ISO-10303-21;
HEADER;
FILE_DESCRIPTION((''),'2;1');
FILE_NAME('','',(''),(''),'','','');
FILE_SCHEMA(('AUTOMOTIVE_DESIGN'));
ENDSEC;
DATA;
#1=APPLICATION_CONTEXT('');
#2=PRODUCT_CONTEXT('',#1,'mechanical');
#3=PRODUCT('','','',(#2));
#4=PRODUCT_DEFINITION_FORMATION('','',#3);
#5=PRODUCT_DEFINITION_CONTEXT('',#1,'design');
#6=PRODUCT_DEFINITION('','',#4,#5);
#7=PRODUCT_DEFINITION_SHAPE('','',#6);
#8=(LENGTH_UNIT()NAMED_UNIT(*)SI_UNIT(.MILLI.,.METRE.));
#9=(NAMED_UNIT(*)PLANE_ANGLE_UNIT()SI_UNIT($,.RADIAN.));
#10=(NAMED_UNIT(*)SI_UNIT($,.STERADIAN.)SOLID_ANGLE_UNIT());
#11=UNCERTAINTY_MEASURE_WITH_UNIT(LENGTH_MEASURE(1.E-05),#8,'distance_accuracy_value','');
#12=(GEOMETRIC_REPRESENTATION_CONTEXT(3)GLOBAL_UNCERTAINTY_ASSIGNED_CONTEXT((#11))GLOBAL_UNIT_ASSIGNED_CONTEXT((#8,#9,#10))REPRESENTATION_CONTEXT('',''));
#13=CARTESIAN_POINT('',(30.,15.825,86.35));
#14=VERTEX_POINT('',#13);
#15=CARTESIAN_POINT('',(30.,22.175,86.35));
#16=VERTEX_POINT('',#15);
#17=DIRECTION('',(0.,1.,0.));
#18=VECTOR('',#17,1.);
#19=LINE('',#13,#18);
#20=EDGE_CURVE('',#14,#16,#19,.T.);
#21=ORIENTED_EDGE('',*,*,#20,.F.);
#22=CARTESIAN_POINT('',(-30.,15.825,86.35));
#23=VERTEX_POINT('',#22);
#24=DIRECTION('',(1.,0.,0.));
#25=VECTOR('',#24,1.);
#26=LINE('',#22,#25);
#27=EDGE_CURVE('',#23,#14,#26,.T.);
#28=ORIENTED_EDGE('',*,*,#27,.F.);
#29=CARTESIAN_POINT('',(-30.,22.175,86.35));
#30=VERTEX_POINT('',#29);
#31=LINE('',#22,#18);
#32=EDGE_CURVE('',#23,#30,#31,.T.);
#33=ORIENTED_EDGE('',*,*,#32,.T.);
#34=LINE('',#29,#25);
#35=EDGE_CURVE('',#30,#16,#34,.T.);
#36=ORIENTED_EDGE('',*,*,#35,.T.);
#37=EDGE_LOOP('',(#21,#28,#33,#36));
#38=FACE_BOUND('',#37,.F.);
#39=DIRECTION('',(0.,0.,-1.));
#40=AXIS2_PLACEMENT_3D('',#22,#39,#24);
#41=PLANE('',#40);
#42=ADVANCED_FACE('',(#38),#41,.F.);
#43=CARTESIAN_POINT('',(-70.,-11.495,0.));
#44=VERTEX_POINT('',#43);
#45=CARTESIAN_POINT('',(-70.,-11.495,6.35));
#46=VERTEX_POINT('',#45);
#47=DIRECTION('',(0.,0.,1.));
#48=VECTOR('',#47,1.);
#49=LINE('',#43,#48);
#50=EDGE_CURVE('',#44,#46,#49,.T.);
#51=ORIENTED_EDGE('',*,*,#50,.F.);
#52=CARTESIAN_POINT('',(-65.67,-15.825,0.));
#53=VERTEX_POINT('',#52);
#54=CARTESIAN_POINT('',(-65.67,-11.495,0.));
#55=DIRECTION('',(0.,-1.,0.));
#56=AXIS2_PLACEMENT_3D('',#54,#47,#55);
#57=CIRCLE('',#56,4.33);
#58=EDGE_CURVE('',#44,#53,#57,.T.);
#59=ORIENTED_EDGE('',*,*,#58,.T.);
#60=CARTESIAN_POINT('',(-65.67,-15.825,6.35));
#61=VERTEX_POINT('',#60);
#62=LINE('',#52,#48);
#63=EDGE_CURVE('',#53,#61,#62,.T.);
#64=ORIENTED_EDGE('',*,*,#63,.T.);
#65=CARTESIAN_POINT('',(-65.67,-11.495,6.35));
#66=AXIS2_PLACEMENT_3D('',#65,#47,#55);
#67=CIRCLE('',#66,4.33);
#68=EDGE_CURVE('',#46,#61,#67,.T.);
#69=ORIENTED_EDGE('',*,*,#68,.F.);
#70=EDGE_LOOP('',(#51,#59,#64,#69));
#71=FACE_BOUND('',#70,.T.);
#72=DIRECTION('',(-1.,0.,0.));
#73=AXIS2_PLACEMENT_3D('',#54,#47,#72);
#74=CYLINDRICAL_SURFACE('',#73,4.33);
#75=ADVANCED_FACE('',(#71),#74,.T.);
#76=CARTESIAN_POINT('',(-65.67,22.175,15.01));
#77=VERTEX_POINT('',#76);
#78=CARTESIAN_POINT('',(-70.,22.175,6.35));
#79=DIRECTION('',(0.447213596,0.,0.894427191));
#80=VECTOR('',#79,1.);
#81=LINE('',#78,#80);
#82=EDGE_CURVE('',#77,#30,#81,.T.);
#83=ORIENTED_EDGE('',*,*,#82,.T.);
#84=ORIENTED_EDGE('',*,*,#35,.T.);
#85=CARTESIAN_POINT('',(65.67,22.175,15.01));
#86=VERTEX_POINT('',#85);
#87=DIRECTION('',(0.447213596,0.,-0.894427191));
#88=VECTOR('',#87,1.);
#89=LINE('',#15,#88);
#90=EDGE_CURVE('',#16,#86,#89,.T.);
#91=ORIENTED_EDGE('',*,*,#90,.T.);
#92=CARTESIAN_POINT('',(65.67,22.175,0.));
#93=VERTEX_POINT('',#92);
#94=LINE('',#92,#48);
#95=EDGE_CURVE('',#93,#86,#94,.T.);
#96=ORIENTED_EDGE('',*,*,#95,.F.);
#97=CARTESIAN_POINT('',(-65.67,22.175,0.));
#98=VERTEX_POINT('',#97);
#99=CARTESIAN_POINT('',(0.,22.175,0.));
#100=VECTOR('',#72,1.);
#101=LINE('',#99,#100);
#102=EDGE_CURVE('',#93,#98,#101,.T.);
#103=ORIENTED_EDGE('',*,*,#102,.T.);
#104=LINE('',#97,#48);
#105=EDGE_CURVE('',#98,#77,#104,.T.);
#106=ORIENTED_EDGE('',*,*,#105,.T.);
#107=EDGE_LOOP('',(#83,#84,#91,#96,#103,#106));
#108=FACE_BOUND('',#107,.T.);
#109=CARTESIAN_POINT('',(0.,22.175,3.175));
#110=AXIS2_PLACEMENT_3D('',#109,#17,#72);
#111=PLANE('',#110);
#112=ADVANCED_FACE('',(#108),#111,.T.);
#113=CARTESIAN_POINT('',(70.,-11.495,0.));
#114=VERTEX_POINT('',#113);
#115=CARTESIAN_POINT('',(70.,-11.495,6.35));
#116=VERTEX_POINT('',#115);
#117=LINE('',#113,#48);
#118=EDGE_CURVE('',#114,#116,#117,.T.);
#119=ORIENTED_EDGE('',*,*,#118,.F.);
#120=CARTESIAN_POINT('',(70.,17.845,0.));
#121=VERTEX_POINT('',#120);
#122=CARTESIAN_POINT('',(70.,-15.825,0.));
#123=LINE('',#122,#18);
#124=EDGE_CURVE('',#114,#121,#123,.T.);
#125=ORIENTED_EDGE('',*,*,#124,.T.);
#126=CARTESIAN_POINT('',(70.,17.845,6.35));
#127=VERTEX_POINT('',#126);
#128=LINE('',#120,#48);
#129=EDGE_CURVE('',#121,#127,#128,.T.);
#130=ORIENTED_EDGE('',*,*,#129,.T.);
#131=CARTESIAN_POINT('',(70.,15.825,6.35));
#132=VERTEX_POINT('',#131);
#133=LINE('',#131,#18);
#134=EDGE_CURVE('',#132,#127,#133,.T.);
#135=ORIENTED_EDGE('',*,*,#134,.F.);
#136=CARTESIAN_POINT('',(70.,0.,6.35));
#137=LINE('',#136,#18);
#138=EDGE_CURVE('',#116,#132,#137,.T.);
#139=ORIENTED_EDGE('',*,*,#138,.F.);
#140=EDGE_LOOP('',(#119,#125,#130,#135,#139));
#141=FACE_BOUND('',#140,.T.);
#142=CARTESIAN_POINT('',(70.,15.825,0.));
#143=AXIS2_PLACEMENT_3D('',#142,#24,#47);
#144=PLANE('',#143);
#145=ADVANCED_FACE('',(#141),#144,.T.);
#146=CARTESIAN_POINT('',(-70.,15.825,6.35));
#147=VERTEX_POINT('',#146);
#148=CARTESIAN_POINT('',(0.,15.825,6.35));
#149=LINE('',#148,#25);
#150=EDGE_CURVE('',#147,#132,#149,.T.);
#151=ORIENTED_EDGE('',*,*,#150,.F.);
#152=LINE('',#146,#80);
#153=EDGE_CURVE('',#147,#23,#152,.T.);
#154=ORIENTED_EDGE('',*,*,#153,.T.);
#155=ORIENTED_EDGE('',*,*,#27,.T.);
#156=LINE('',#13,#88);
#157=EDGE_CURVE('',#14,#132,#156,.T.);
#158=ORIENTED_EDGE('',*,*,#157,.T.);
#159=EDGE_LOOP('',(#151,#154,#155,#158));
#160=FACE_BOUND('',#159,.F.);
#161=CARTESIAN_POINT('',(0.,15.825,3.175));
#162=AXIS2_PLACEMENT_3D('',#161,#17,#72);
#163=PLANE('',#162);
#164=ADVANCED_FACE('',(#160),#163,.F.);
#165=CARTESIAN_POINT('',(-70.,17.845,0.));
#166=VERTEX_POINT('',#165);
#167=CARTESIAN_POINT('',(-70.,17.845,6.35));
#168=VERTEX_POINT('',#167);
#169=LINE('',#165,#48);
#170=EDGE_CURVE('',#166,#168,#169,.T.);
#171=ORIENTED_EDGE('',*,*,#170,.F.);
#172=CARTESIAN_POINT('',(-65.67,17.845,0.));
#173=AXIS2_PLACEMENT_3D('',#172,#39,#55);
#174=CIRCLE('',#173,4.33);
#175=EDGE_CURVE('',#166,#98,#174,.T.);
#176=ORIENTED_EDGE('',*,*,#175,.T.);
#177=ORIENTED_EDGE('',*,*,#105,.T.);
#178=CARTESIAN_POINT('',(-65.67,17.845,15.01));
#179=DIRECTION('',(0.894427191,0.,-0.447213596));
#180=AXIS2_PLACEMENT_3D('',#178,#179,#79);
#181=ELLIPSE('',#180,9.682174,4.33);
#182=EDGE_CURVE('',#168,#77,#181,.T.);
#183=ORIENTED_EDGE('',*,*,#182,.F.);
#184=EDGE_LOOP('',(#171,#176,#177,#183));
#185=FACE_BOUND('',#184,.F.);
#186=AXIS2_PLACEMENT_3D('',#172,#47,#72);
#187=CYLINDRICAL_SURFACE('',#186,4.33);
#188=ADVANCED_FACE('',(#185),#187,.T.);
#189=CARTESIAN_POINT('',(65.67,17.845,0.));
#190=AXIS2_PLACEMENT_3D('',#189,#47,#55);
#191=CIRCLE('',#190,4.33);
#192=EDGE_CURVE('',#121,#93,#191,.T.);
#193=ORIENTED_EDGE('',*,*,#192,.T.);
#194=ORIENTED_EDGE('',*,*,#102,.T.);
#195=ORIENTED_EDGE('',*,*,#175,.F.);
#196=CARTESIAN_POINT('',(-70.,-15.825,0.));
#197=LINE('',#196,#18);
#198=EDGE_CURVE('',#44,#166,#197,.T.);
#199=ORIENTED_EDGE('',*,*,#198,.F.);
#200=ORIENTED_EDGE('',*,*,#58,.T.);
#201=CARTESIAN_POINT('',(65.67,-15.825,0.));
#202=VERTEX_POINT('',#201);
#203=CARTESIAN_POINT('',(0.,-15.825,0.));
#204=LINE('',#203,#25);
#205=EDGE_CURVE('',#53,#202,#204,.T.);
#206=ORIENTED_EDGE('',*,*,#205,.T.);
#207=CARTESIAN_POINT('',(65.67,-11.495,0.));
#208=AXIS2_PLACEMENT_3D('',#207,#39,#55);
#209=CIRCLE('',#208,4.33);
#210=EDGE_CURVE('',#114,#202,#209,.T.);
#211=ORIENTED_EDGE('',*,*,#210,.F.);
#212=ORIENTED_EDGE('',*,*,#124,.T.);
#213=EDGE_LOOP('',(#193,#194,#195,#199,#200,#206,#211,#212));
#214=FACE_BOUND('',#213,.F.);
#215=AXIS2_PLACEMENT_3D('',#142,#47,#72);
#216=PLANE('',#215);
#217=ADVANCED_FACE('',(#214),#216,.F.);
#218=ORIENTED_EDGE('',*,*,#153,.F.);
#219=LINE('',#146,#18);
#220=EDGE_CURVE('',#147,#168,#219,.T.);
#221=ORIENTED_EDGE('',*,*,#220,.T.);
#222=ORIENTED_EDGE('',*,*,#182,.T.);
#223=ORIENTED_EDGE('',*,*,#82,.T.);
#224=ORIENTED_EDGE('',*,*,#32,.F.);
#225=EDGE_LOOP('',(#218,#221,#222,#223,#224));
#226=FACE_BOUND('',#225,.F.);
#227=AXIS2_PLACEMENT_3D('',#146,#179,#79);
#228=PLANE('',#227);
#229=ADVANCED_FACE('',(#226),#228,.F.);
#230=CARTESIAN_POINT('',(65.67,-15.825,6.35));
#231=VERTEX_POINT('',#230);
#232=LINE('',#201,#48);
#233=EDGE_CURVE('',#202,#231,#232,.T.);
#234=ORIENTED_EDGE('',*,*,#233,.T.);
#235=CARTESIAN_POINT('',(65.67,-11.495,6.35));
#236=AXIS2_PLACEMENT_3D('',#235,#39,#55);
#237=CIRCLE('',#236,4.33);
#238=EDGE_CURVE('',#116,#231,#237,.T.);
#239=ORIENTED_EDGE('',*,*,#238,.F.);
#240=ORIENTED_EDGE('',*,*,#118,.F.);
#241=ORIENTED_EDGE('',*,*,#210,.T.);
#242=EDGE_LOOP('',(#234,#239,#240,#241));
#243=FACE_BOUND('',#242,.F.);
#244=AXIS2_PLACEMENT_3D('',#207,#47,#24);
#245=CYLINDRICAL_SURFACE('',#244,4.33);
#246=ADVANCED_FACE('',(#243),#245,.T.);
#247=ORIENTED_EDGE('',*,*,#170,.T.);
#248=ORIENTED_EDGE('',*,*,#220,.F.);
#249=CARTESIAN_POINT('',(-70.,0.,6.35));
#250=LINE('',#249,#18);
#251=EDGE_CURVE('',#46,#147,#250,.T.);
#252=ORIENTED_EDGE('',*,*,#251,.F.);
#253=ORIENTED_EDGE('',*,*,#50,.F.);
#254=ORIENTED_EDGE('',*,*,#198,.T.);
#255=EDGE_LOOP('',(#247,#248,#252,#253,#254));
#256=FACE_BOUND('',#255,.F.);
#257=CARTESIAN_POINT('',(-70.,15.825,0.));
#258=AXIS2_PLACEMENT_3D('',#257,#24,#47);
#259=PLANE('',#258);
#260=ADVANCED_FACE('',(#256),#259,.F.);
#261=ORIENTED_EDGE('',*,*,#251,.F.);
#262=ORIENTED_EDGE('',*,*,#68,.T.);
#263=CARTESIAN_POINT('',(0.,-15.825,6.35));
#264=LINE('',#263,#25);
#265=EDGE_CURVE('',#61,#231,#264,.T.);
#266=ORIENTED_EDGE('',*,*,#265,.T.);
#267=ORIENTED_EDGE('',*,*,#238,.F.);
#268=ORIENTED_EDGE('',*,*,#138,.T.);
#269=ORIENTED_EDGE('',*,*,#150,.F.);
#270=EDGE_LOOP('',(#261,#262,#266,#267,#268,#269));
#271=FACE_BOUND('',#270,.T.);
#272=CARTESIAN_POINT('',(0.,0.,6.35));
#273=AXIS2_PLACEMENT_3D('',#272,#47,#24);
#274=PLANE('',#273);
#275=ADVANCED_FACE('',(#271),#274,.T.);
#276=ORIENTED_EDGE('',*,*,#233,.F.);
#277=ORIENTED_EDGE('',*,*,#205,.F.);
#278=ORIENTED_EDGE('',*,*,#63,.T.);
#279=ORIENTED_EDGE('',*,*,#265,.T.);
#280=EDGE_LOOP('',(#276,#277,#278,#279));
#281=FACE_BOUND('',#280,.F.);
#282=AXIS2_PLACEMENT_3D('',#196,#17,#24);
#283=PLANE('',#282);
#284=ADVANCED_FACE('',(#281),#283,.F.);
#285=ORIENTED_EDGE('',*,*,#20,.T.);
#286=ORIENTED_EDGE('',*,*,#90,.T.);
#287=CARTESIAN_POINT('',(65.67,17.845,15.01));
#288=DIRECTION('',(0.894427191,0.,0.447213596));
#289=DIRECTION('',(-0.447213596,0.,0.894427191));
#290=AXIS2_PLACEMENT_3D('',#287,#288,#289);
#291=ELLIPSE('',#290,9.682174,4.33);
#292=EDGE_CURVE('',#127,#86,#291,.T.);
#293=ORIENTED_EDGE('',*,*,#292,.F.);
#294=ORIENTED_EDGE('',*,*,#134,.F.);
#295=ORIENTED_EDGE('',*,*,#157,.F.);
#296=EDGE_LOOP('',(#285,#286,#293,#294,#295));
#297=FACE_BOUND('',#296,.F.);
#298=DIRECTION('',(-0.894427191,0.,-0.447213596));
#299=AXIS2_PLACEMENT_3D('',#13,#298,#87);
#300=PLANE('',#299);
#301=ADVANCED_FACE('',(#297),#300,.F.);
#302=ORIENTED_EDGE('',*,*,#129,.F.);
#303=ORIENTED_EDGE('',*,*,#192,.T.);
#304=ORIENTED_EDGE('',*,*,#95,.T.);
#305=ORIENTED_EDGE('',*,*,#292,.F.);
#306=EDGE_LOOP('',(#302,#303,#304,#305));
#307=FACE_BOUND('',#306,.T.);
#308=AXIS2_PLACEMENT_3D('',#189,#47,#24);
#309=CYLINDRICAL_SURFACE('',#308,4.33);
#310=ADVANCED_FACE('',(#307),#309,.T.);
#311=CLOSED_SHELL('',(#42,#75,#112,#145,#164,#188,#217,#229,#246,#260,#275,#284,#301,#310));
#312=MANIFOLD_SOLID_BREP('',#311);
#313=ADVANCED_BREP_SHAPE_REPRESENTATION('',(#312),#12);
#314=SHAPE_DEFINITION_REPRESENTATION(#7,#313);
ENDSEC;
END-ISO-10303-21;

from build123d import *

# Parameters (mm, degrees)
F0_W     = 140
F0_H     = 31.65
F1_DEPTH = 6.35
F2_W     = 140
F2_H     = 6.35
F3_DEPTH = 6.35
F4_R     = 4.33


with BuildPart() as f1:
    # F0 (on Top) → F1 (new body)
    with BuildSketch(Plane.XY):
        Rectangle(F0_W, F0_H)
    extrude(amount=F1_DEPTH)

    # F2 (on face) → F3 (join)
    with BuildSketch(Plane(origin=(0, 15.825, 0), x_dir=(-1, 0, 0), z_dir=(0, 1, 0))):
        with Locations((0, 3.175)):
            Rectangle(F2_W, F2_H)
        Polygon((-30, 86.35), (-70, 6.35), (70, 6.35), (30, 86.35), align=None)
    extrude(amount=F3_DEPTH)

    # F4
    f4_edges = [f1.edges().sort_by_distance(p)[0] for p in [
        (-70, -15.825, 3.175),
        (70, -15.825, 3.175),
        (70, 22.175, 3.175),
        (-70, 22.175, 3.175),
    ]]
    fillet(f4_edges, radius=F4_R)


solid = f1.part
